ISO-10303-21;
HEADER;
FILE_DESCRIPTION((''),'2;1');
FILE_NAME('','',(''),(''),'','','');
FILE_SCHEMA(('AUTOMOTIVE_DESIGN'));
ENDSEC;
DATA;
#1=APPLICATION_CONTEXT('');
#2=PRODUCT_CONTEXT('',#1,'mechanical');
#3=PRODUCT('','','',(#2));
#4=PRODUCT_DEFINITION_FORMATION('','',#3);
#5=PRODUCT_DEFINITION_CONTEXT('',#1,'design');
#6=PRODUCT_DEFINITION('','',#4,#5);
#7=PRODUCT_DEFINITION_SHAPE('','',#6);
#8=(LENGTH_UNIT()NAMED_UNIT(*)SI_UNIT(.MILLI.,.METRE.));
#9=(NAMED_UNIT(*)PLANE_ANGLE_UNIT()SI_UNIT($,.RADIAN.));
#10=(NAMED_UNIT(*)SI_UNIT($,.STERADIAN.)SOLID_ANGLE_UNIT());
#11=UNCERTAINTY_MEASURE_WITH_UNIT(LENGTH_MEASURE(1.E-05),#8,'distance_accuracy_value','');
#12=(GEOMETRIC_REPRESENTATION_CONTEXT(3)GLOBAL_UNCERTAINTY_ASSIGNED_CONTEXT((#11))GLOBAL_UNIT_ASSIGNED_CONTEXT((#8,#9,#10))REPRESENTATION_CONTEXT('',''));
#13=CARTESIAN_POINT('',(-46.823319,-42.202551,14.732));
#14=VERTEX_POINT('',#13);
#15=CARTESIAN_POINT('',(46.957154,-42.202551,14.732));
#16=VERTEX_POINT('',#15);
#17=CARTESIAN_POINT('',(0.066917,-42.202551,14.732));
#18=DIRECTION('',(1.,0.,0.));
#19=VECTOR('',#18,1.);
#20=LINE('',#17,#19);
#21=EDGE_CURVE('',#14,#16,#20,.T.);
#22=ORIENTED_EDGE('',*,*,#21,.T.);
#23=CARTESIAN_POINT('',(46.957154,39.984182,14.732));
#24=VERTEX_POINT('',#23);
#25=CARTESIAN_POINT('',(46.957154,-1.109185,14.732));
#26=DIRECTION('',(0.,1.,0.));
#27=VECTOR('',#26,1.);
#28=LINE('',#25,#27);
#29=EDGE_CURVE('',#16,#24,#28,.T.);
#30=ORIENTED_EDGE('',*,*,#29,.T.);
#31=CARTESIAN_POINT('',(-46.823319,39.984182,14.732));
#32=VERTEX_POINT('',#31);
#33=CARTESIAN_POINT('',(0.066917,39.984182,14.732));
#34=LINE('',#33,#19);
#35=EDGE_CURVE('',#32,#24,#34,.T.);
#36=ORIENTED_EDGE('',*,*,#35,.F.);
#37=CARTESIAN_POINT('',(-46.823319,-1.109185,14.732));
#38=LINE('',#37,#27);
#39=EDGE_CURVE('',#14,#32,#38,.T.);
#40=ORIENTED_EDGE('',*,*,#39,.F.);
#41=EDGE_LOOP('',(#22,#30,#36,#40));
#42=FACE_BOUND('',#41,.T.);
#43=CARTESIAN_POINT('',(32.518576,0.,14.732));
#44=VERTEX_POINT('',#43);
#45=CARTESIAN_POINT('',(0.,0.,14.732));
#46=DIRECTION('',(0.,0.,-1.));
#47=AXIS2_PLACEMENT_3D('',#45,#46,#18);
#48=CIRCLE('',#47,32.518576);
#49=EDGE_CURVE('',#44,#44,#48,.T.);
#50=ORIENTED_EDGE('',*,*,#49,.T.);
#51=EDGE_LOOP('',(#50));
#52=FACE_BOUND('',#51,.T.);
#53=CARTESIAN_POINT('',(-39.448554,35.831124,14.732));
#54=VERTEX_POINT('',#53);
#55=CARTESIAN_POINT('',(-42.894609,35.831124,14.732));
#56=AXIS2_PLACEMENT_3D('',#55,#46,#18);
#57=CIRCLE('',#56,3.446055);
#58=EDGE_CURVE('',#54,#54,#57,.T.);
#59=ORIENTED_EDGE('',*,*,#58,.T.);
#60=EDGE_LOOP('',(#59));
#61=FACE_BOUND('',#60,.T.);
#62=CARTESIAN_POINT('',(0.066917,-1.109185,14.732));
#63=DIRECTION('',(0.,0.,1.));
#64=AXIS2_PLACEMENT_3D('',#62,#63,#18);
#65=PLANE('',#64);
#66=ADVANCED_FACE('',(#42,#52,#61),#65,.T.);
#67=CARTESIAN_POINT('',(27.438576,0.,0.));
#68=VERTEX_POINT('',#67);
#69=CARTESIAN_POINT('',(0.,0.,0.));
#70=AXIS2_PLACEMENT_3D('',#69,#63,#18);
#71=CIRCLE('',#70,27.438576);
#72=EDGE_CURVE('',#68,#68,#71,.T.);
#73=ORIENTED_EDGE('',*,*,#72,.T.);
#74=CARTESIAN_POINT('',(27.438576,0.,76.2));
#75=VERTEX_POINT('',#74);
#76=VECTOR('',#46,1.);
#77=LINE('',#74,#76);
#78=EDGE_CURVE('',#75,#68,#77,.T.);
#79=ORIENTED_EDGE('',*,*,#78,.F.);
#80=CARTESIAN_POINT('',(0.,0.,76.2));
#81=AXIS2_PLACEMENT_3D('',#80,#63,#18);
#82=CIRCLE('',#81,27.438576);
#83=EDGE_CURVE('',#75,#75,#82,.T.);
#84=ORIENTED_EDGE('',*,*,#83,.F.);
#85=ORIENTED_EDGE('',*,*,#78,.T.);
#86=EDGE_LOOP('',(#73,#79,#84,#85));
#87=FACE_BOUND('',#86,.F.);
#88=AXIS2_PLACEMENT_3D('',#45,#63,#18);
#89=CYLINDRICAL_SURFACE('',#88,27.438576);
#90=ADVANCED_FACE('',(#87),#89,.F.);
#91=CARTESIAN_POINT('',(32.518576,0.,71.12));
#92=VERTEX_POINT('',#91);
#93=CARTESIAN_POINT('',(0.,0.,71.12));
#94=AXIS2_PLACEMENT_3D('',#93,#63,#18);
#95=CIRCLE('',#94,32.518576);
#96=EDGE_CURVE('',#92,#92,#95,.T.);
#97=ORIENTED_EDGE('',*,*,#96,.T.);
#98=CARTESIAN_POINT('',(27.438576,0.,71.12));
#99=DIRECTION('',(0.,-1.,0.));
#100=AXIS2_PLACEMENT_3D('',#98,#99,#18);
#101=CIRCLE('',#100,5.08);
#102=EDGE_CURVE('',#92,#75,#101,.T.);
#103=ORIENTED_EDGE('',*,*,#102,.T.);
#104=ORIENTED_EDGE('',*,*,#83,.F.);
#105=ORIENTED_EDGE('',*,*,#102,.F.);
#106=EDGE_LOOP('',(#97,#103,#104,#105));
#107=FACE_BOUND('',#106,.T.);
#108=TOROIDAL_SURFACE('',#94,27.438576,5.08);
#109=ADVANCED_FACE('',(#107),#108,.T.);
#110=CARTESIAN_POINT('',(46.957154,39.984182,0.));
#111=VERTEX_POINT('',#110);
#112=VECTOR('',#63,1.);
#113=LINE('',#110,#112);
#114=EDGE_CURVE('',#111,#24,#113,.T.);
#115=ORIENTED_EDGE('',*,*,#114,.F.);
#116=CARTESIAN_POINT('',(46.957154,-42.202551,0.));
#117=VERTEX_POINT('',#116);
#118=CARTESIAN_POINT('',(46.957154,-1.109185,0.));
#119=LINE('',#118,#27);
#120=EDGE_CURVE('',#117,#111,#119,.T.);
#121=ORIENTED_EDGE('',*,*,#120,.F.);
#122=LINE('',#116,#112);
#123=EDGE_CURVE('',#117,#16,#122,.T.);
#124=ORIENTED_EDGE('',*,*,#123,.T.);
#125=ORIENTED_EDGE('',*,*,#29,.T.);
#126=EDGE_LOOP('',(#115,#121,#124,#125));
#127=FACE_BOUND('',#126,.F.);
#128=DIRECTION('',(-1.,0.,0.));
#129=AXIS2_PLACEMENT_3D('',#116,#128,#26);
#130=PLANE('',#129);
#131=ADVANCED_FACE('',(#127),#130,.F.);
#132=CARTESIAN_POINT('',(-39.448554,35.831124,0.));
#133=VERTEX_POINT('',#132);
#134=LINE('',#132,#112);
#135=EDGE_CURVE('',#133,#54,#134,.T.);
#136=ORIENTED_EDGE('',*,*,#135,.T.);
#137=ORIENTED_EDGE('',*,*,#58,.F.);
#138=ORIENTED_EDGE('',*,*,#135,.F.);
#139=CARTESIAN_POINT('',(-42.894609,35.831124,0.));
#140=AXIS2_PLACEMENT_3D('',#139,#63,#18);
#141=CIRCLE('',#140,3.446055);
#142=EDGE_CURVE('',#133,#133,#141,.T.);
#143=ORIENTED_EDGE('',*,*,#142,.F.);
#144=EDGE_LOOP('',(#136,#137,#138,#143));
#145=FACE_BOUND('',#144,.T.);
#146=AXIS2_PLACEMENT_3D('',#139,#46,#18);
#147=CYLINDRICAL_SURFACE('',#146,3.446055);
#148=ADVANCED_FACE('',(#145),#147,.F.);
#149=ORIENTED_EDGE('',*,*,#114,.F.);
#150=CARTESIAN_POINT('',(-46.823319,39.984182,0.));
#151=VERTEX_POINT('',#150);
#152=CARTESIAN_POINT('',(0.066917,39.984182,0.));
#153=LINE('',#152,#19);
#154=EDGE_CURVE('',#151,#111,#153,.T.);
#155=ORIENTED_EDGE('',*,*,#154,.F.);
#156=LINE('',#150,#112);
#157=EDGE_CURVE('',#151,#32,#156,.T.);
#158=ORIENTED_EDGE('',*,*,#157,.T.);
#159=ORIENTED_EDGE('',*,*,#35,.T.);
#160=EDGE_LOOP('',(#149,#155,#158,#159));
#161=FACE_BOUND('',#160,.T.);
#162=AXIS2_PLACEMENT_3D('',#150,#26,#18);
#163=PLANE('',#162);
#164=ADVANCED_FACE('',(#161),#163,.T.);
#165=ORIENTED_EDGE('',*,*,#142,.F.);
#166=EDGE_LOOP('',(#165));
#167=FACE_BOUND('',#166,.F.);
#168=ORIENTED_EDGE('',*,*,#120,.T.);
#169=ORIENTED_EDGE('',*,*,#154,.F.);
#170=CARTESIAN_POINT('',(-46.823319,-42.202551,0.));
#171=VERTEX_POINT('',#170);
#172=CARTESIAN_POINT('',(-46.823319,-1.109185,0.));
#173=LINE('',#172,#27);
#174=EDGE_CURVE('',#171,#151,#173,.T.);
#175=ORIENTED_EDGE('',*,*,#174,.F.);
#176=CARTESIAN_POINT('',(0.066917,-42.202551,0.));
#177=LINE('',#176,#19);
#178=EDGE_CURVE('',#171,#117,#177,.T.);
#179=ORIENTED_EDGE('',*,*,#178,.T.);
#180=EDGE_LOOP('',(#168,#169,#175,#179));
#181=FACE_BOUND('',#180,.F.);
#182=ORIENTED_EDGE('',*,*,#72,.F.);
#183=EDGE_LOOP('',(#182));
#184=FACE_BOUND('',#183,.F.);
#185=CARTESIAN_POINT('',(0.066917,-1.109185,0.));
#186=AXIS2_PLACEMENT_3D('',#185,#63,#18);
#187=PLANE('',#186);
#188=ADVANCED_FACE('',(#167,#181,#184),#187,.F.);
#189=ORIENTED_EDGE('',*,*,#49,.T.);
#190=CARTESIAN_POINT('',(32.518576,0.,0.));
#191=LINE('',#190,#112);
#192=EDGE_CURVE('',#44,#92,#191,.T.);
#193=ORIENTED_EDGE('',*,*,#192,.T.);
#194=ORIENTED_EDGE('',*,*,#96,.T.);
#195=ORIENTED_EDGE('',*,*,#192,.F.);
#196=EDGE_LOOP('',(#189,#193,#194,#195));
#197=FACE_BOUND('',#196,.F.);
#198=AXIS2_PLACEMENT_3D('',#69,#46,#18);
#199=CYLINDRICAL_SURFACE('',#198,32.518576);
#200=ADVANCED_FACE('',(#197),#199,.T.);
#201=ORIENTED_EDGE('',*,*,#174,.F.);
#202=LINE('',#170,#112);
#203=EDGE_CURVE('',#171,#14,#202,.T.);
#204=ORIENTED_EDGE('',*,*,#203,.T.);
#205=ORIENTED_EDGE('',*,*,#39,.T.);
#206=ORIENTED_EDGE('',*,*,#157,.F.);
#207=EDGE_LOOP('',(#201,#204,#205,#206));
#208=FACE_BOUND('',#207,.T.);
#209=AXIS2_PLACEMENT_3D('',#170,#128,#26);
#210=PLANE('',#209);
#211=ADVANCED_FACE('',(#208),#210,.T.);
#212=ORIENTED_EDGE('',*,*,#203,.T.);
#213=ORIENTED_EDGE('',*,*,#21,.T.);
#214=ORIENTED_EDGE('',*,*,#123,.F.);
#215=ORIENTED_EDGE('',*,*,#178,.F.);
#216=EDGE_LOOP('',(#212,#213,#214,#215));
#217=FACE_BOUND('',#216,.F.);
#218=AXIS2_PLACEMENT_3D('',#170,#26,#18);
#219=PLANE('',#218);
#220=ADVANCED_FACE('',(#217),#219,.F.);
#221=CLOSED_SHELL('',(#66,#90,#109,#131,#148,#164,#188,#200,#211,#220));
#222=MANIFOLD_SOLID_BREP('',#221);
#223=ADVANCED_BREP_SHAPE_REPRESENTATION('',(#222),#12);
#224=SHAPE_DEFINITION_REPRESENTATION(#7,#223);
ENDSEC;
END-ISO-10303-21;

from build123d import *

# Parameters (mm, degrees)
F0_R     = 32.5185756137
F1_DEPTH = 76.2
F2_R     = 5.08
F3_DEPTH = 124.714
F4_R     = 5.07999
F5_W     = 93.7804728746
F5_H     = 82.1867324412
F6_DEPTH = 14.732
F7_DEPTH = 36.83
F8_R     = 3.4460553294
F9_DEPTH = 19.558


# Not quite as in the source:
# - a fillet or chamfer is up to 0.001 mm smaller than in the source, because OpenCascade refuses the exact size


with BuildPart() as f1:
    # F0 (on Top) → F1 (new body)
    with BuildSketch(Plane.XY):
        Circle(F0_R)
    extrude(amount=F1_DEPTH)

    # F2
    f2_edges = [f1.edges().sort_by_distance(p)[0] for p in [
        (-32.518576, 0, 76.2),
    ]]
    fillet(f2_edges, radius=F2_R)

    # F3 (cut): a face of the model
    f3_faces = [f1.faces().sort_by_distance(p)[0] for p in [
        (0, 0, 76.2),
    ]]
    extrude(f3_faces, amount=-F3_DEPTH, mode=Mode.SUBTRACT)

    # F4 (radius 5.08 in the source; OpenCascade refuses exactly that, so slightly less here)
    f4_edges = [f1.edges().sort_by_distance(p)[0] for p in [
        (-32.518576, 0, 0),
    ]]
    fillet(f4_edges, radius=F4_R)

    # F5 (on Top) → F6 (join)
    with BuildSketch(Plane.XY):
        with Locations((0.0669173896, -1.1091846973)):
            Rectangle(F5_W, F5_H)
    extrude(amount=F6_DEPTH)

    # F7 (cut): a face of the model
    f7_faces = [f1.faces().sort_by_distance(p)[0] for p in [
        (0, 0, 14.732),
    ]]
    extrude(f7_faces, amount=-F7_DEPTH, mode=Mode.SUBTRACT)

    # F8 (on Top) → F9 (cut)
    with BuildSketch(Plane.XY):
        with Locations((-42.8946092725, 35.8311235905)):
            Circle(F8_R)
    extrude(amount=F9_DEPTH, mode=Mode.SUBTRACT)


solid = f1.part
